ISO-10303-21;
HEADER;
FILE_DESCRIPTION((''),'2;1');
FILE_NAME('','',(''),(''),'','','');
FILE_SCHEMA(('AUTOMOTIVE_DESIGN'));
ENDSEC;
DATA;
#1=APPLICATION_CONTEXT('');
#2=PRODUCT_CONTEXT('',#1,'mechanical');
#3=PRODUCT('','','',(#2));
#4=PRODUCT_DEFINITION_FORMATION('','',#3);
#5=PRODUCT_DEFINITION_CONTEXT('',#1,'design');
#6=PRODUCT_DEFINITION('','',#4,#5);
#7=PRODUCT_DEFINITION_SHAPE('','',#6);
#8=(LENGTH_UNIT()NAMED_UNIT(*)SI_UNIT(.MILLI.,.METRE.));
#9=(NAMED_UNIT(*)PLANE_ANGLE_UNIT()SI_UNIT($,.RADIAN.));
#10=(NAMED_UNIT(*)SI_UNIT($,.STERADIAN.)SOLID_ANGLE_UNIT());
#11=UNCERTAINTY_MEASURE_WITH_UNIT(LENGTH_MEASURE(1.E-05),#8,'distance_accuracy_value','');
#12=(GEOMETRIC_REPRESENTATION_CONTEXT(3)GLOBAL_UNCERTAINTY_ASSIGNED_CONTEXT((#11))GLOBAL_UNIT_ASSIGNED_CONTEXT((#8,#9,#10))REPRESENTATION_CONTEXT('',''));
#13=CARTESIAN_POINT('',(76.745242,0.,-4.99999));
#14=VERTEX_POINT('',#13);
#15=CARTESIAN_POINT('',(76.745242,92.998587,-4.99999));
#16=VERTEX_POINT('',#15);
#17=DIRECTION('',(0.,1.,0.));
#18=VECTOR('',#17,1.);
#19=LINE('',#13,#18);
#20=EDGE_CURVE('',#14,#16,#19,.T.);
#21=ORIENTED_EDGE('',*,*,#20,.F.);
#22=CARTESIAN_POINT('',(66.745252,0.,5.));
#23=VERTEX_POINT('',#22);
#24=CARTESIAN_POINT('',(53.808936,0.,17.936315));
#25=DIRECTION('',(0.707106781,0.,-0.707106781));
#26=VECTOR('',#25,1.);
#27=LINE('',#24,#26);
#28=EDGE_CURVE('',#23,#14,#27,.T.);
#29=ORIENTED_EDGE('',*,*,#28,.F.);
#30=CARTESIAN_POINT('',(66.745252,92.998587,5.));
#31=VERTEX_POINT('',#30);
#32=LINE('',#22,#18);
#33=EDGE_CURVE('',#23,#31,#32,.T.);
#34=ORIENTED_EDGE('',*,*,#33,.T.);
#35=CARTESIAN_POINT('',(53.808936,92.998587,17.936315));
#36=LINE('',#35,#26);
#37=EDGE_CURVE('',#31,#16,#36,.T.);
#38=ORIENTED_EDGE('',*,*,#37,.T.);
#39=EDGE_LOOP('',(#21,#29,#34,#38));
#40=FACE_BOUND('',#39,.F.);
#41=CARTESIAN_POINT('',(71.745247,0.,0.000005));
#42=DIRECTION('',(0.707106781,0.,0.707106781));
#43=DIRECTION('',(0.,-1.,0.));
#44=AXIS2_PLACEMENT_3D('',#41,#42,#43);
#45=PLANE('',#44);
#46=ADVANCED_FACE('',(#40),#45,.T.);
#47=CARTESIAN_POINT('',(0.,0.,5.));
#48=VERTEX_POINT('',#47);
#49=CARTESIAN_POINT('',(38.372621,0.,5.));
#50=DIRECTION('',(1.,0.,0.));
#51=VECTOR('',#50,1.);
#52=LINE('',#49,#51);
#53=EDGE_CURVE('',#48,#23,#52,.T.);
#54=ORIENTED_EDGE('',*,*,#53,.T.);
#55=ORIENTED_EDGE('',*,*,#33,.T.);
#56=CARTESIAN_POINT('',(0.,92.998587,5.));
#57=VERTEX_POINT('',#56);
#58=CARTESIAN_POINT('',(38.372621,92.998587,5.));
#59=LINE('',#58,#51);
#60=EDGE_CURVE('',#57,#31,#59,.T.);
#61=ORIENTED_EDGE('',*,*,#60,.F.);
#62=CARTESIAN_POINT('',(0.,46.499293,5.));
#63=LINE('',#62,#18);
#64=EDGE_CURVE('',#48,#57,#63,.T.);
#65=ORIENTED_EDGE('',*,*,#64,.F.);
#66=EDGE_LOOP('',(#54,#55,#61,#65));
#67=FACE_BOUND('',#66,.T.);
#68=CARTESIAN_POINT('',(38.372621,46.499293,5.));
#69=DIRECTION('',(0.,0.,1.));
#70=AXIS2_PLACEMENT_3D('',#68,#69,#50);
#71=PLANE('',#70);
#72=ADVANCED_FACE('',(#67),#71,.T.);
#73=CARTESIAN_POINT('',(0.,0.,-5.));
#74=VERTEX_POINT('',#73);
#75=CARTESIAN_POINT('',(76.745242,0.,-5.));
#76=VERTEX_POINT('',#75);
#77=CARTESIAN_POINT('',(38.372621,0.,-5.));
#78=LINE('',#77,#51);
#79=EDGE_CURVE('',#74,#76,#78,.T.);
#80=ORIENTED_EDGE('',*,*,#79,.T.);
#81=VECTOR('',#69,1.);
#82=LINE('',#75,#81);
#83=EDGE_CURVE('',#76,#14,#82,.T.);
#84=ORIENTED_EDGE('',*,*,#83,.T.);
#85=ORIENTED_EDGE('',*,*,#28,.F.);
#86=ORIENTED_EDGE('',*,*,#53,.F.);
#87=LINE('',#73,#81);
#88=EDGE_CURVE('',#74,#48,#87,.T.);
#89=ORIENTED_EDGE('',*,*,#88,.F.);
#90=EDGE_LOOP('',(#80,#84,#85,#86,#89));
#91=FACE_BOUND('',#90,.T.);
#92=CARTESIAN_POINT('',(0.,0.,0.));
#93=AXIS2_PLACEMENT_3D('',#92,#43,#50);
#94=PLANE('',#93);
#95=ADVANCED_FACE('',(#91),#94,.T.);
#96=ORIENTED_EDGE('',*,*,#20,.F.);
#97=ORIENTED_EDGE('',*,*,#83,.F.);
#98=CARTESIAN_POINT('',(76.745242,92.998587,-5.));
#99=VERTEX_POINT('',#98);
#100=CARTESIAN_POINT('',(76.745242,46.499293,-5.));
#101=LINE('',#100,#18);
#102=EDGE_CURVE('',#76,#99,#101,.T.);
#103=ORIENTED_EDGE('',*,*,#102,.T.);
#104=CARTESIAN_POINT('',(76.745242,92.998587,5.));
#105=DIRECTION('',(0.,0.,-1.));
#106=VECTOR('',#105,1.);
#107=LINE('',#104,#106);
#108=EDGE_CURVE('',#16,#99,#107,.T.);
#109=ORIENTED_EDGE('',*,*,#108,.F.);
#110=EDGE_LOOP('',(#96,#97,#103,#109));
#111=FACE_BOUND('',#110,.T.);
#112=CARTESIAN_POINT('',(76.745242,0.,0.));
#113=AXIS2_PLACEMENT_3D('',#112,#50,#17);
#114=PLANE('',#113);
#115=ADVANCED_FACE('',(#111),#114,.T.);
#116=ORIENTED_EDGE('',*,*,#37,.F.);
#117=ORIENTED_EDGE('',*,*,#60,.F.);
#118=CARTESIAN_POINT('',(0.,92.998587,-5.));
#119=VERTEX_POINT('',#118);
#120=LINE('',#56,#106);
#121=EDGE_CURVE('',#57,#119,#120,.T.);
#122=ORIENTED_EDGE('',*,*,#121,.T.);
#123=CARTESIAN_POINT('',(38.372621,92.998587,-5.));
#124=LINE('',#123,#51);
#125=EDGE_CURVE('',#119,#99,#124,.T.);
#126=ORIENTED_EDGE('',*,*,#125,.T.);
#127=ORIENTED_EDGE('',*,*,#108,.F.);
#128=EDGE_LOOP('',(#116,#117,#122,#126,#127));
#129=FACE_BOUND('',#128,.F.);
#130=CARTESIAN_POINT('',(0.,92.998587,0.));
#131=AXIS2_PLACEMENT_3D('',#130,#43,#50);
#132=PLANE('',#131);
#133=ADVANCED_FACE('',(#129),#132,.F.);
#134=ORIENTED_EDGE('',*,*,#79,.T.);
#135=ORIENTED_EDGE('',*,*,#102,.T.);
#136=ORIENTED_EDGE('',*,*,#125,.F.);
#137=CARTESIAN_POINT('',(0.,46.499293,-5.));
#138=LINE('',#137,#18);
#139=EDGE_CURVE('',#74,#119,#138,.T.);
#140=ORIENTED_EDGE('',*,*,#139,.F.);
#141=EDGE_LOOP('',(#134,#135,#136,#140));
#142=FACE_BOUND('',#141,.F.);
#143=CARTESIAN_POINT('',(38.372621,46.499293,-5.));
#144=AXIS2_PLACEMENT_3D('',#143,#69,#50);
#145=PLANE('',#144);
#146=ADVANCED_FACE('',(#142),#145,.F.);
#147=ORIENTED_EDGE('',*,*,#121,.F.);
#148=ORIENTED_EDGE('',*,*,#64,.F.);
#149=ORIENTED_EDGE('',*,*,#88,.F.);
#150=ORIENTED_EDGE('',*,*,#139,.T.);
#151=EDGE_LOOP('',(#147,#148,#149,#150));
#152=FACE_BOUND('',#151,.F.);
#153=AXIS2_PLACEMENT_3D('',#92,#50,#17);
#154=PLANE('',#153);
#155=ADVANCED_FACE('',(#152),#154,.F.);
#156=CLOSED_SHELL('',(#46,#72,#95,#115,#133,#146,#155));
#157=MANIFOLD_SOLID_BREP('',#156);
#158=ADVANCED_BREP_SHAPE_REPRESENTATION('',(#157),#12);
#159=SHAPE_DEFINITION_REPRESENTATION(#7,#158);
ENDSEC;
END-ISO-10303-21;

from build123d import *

# Parameters (mm, degrees)
F0_W     = 76.7452418804
F0_H     = 92.9985865951
F1_DEPTH = 5
F3_SIZE  = 9.99999


# Not quite as in the source:
# - a fillet or chamfer is up to 0.001 mm smaller than in the source, because OpenCascade refuses the exact size


with BuildPart() as f1:
    # F0 (on Top) → F1 (new body, symmetric)
    with BuildSketch(Plane.XY):
        with Locations((38.3726209402, 46.4992932975)):
            Rectangle(F0_W, F0_H)
    extrude(amount=F1_DEPTH, both=True)

    # F3 (size 10 in the source; OpenCascade refuses exactly that, so slightly less here)
    f3_edges = [f1.edges().sort_by_distance(p)[0] for p in [
        (76.745242, 46.499293, 5),
    ]]
    chamfer(f3_edges, length=F3_SIZE)


solid = f1.part
